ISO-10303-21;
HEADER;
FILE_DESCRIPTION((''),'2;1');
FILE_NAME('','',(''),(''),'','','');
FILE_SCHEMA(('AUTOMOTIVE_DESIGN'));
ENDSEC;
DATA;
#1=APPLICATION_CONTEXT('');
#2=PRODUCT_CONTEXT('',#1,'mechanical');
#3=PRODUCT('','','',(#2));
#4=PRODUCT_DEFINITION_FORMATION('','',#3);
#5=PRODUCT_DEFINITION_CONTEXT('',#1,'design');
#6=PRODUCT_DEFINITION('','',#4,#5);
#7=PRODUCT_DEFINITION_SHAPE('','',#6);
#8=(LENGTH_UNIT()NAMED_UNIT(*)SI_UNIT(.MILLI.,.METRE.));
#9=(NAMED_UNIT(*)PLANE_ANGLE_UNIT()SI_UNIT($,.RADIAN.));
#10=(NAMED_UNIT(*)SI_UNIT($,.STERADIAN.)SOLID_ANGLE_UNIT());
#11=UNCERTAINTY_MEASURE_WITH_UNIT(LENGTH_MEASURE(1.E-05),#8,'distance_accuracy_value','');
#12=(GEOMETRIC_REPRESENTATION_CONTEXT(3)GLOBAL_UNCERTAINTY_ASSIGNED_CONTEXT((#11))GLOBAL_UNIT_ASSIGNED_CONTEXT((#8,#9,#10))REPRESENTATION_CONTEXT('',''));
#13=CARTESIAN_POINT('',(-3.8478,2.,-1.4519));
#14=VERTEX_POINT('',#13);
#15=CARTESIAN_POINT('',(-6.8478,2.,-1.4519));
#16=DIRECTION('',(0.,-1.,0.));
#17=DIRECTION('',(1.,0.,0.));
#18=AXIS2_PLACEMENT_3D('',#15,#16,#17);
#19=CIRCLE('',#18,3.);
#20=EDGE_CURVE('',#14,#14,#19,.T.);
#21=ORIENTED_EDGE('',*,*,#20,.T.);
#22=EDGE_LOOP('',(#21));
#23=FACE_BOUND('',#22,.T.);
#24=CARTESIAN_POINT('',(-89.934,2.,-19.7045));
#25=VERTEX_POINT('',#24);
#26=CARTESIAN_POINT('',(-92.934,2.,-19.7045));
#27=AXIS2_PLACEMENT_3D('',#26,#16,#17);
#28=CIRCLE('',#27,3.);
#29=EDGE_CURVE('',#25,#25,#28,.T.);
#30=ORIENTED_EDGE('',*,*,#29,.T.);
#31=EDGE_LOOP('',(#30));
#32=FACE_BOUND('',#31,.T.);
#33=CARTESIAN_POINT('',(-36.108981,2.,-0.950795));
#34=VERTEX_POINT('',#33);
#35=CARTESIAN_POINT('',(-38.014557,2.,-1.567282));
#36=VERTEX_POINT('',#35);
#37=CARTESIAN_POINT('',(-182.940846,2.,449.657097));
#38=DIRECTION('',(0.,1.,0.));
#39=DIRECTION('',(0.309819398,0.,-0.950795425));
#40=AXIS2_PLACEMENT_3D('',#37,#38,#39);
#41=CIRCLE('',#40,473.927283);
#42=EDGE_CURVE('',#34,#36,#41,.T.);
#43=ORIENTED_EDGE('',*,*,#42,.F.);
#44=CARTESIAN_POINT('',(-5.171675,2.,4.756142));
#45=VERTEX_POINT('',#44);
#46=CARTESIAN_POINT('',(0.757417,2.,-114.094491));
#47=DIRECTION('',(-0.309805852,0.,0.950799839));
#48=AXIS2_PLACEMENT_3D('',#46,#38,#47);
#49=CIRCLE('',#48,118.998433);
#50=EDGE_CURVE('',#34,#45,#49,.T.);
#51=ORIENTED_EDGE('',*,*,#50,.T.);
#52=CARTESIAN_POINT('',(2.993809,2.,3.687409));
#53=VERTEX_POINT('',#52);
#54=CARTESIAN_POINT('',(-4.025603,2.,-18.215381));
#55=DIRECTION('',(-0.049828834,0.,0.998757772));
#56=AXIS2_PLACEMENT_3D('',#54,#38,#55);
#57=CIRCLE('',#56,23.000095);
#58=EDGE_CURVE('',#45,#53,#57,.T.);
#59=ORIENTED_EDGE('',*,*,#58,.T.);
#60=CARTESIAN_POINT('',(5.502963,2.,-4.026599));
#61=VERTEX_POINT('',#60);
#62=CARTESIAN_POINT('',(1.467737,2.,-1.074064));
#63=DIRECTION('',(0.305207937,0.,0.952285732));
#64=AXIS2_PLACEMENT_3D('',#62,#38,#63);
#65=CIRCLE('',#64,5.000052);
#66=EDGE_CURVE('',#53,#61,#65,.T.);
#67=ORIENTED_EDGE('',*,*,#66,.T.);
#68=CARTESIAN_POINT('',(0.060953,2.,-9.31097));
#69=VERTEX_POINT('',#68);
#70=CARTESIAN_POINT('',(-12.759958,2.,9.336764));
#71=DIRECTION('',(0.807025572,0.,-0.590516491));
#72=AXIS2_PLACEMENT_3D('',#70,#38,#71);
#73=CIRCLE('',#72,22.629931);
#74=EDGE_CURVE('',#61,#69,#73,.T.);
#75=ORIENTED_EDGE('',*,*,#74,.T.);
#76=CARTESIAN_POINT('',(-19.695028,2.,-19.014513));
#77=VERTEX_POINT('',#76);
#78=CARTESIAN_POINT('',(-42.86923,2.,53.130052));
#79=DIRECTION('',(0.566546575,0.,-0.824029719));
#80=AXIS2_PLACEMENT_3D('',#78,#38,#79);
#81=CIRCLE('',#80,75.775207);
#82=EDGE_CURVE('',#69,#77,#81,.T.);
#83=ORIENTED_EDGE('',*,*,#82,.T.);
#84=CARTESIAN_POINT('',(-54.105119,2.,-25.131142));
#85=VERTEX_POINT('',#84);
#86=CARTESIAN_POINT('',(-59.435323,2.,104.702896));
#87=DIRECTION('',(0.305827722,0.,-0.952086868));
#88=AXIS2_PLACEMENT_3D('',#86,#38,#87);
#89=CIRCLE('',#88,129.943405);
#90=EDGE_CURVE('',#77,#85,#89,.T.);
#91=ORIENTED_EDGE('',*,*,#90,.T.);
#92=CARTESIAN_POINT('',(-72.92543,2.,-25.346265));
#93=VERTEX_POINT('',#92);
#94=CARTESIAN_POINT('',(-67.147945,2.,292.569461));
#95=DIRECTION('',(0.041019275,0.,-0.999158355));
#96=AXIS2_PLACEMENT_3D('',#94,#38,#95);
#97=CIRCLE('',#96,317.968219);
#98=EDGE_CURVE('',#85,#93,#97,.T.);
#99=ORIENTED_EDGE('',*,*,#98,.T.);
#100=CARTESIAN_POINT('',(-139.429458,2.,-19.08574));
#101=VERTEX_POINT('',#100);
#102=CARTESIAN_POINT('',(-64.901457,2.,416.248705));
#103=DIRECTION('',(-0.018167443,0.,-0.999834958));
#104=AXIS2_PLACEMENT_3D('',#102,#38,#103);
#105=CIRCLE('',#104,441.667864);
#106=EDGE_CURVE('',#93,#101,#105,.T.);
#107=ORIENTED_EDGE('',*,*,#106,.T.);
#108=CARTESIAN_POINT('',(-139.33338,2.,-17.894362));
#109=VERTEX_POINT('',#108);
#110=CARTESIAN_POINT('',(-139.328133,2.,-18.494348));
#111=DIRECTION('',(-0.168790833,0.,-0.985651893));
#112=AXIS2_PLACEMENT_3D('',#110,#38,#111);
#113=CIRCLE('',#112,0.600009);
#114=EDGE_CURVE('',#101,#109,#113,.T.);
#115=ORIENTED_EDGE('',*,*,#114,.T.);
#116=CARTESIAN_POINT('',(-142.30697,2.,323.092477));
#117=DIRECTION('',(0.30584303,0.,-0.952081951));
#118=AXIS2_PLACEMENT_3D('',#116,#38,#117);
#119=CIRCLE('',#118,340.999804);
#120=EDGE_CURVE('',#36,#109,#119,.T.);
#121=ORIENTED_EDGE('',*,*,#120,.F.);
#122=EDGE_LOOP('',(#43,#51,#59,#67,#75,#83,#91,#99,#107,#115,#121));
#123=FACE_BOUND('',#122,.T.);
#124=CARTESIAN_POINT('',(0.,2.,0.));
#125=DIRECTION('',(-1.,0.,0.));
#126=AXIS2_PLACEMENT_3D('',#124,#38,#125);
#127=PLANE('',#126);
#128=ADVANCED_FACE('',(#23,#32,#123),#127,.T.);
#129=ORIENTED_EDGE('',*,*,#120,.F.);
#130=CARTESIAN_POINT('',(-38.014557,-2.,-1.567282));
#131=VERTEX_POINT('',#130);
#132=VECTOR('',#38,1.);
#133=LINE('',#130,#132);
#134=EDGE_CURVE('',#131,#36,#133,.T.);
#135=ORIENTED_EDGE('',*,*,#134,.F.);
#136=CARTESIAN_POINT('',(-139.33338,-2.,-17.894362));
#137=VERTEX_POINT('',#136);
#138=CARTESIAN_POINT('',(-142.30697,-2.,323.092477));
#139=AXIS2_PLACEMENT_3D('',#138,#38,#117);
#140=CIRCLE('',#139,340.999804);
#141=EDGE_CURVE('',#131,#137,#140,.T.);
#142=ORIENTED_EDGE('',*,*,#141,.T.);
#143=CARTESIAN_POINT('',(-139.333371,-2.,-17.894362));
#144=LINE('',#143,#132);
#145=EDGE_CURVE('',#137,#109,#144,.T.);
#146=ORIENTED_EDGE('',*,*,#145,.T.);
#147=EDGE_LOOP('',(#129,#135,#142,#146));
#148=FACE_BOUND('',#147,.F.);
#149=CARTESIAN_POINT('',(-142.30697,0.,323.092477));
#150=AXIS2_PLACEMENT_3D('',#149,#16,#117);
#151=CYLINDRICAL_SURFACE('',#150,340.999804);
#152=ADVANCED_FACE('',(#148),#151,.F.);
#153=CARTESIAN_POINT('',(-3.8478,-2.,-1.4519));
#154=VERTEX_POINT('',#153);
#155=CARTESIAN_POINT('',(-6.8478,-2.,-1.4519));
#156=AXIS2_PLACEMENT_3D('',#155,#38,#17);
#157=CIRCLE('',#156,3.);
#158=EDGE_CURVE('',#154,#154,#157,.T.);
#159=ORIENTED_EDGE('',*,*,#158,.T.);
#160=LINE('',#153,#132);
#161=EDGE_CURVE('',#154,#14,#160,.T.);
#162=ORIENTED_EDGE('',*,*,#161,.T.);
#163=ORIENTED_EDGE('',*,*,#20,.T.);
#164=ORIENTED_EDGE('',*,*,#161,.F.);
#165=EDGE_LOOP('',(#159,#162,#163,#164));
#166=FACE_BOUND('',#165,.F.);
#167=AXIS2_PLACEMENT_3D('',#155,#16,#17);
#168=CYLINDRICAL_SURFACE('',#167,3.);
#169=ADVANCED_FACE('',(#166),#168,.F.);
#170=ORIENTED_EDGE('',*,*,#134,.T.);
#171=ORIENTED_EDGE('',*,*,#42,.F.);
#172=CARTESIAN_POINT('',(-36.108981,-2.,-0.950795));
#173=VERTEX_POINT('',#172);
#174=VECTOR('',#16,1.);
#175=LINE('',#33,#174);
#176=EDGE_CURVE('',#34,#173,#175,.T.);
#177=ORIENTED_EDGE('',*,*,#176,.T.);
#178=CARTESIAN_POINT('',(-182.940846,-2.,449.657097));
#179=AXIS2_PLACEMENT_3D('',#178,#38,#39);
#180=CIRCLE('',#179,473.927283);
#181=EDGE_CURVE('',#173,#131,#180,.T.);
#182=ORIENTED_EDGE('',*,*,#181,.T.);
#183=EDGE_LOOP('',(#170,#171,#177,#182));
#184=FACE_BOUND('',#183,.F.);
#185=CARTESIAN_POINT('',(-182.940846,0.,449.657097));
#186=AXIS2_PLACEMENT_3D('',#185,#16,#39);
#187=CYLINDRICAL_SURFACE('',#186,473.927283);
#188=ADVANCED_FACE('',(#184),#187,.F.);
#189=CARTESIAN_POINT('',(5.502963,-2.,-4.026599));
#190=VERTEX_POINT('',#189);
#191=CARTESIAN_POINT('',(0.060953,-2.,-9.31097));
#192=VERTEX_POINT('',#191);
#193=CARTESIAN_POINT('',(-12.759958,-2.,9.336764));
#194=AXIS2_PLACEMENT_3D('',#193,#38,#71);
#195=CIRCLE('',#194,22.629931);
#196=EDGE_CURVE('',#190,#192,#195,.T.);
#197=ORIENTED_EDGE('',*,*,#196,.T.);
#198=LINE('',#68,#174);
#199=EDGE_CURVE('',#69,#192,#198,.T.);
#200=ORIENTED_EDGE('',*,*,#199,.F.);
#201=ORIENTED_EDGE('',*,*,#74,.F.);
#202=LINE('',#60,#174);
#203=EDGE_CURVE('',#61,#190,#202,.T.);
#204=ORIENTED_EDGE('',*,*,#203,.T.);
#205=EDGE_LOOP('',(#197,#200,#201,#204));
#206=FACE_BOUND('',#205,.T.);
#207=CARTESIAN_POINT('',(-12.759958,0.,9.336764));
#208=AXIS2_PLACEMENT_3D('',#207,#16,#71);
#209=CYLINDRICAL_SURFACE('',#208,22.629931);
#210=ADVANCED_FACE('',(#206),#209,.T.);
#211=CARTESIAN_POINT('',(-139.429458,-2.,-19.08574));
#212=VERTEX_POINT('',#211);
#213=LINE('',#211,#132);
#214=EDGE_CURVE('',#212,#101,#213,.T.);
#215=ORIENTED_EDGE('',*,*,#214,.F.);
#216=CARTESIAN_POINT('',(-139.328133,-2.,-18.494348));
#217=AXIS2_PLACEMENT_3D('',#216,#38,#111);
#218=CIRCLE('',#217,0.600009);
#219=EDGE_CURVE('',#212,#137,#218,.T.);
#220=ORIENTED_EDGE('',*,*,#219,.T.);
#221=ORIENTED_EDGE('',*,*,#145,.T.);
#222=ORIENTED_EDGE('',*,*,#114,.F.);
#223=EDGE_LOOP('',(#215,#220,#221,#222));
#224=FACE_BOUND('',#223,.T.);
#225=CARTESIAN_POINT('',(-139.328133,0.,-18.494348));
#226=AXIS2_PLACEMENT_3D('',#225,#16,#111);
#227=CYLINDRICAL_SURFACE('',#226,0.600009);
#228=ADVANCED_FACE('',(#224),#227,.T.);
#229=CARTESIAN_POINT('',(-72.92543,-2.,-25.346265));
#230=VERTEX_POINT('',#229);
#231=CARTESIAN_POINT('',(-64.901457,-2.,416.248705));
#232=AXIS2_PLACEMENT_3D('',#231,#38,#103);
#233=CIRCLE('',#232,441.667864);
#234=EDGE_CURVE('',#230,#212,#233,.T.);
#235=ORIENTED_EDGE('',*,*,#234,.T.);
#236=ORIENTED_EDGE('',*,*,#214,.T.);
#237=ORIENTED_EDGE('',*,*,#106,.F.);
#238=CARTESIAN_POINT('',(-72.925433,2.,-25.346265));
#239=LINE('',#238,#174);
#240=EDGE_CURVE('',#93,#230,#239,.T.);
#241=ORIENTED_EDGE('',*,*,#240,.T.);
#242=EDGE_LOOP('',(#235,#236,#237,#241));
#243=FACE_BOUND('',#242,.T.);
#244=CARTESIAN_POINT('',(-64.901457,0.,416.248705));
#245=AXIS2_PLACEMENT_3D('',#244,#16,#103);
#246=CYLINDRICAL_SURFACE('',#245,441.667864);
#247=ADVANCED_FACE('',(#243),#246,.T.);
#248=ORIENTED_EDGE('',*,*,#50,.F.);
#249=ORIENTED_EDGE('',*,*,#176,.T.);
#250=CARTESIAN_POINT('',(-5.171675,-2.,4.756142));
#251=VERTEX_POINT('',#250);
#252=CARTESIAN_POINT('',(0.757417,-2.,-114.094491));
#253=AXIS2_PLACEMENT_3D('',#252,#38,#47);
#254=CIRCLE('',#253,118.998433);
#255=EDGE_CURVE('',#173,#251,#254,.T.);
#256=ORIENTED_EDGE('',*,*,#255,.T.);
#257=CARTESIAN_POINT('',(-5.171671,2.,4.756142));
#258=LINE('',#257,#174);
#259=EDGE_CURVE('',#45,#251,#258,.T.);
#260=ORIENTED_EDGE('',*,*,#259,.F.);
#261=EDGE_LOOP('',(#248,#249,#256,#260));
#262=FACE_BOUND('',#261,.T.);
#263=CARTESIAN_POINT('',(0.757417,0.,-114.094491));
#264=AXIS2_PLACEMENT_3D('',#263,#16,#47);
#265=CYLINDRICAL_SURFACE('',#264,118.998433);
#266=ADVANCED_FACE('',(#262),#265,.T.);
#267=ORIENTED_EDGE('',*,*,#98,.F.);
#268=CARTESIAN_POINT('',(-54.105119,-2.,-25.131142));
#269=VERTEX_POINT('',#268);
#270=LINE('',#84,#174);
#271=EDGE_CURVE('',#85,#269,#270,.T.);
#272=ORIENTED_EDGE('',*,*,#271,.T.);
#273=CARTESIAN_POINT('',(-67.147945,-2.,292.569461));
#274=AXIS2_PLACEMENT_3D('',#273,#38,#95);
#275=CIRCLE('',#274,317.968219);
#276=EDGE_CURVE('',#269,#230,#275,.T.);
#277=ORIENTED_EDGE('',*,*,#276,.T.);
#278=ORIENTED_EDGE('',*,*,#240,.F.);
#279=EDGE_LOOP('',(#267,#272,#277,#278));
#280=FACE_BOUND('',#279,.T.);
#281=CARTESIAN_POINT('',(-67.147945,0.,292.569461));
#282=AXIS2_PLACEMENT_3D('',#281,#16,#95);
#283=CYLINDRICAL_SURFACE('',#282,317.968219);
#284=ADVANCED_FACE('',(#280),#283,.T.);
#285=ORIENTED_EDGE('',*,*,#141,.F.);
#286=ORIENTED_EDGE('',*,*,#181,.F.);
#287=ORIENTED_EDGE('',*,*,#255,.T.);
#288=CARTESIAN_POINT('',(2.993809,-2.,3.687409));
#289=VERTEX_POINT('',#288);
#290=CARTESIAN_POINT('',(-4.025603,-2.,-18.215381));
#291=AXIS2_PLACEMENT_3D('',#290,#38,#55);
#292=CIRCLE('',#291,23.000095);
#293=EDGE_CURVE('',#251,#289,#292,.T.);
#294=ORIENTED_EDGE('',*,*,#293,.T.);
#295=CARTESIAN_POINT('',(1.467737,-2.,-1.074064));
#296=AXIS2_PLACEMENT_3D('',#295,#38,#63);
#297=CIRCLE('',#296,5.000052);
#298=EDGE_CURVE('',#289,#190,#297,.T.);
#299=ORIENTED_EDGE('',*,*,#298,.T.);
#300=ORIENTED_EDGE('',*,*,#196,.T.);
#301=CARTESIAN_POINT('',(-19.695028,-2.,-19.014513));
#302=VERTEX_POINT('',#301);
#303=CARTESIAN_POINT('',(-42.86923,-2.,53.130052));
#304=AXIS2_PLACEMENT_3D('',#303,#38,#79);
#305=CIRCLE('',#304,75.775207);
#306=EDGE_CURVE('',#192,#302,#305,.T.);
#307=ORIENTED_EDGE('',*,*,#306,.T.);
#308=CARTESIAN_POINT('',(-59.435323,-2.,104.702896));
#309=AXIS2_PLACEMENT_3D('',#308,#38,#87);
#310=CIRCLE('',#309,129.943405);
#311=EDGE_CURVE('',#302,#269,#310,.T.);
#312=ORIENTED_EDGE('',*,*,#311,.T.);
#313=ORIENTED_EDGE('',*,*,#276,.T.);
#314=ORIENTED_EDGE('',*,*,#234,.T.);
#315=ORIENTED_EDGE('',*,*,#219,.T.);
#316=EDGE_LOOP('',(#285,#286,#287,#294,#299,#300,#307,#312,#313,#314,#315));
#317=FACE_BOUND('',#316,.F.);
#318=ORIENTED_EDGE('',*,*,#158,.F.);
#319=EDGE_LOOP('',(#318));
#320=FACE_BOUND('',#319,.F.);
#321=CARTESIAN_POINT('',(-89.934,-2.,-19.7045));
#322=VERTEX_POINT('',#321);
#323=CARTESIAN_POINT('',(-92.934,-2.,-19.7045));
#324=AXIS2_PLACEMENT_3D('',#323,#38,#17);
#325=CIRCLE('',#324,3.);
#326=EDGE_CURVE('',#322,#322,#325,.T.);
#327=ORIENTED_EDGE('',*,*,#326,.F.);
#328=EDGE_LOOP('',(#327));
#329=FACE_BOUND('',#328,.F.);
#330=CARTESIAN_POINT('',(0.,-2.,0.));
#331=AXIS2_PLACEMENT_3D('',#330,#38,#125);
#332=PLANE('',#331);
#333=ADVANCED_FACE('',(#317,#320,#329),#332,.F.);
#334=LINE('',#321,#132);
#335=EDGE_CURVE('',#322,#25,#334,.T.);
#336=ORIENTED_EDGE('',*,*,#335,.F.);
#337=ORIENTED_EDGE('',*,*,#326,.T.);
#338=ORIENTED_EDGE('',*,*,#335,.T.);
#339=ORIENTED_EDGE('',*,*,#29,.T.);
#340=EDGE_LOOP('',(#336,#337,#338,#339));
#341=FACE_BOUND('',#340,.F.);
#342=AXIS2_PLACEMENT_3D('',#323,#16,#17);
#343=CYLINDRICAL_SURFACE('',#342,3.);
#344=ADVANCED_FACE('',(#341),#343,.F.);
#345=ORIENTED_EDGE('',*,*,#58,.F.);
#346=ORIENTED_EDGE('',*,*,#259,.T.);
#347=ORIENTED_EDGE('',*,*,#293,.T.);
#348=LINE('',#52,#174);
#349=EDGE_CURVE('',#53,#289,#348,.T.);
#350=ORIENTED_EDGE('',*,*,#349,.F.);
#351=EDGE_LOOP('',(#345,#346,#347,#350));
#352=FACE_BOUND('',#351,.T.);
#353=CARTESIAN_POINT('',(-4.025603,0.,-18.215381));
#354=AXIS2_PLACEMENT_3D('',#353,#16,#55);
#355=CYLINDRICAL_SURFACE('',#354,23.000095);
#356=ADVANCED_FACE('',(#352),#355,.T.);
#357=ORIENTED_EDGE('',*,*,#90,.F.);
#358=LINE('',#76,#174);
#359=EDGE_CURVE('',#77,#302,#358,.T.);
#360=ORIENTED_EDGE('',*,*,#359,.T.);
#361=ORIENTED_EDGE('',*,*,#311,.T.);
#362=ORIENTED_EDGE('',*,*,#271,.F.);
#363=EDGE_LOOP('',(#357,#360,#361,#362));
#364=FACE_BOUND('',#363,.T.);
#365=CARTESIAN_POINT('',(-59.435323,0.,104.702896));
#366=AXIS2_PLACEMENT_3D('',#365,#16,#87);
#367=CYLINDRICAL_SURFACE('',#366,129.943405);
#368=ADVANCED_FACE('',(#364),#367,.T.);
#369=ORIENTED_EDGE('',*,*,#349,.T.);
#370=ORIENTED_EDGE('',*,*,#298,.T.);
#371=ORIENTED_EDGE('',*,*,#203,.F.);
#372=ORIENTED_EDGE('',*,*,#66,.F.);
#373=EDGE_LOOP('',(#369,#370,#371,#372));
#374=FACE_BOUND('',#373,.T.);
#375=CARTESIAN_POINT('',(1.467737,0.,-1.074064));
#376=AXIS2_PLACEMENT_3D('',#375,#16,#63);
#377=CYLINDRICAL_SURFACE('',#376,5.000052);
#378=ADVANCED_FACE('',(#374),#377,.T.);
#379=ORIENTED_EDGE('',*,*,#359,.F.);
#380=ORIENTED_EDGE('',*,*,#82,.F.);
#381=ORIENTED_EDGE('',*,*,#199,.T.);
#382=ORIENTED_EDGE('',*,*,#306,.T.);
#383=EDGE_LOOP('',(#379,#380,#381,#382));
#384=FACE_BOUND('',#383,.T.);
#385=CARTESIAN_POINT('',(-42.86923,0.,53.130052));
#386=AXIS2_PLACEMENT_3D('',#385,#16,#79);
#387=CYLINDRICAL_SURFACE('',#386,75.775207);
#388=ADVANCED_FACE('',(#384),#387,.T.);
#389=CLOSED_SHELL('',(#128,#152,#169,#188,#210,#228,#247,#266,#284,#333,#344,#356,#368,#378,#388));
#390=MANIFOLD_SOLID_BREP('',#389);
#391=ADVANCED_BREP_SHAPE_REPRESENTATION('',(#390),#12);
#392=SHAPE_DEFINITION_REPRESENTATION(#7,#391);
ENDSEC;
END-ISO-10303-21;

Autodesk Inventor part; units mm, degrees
ref_plane "YZ Plane" through (0, 0, 0) normal (1, 0, 0) x (0, 1, 0)
ref_plane "XZ Plane" through (0, 0, 0) normal (0, 1, 0) x (-1, 0, 0)
ref_plane "XY Plane" through (0, 0, 0) normal (0, 0, 1) x (1, 0, 0)
sketch "スケッチ1" plane through (0, 0, 0) normal (0, 1, 0) x (-1, 0, 0)
  arc A0 (139.5982, -20.0714) -> (139.3421, -16.8944) centre (139.3282, -18.4944) ccw projected
  arc A1 (72.9436, -26.3461) -> (139.5982, -20.0714) centre (64.9013, 416.2515) ccw projected
  arc A2 (54.0641, -26.1303) -> (72.9436, -26.3461) centre (67.1484, 292.5868) ccw projected
  arc A3 (19.3892, -19.9666) -> (54.0641, -26.1303) centre (59.4352, 104.7024) ccw projected
  arc A4 (-0.6275, -10.135) -> (19.3892, -19.9666) centre (42.8692, 53.13) ccw projected
  arc A5 (-6.31, -4.6171) -> (-0.6275, -10.135) centre (12.76, 9.3368) ccw projected
  arc A6 (-3.299, 4.6397) -> (-6.31, -4.6171) centre (-1.4678, -1.074) ccw projected
  arc A7 (5.2215, 5.7549) -> (-3.299, 4.6397) centre (4.0256, -18.2153) ccw projected
  arc A8 (36.4188, 0) -> (5.2215, 5.7549) centre (-0.7578, -114.096) ccw projected
  arc A9 (36.4188, 0) -> (38.3204, -0.6152) centre (185.125, 456.3841) ccw projected
  arc A10 (38.3204, -0.6152) -> (139.3421, -16.8944) centre (142.307, 323.0926) ccw projected
  point P0 (0, 0)
extrude "押し出し1" add sketch "スケッチ1" along normal mid plane 4
sketch "スケッチ2" plane through (0, -2, 0) normal (0, -1, 0) x (1, 0, 0)
  circle A0 centre (-6.8478, -1.4519) radius 3
  circle A1 centre (-92.934, -19.7045) radius 3
  line L0 (0, 0) -> (-112.4991, -23.8528)
  arc A2 (-139.5982, -20.0714) -> (-72.9436, -26.3461) centre (-64.9013, 416.2515) ccw projected
  dimension "d3" = 6
  dimension "d4" = 6
  dimension "d5" = 115
  dimension "d6" = 7
  dimension "d7" = 95
extrude "押し出し2" cut sketch "スケッチ2" against normal through all
thicken "厚み1" operation cut thickness 1 both sides no extend neighbours no toward (0.0338891, 0, -0.9994256) faces at (-130.7847, 0.6667, -16.7121) (-37.4749, 0.6667, -0.3428) (-8.7492, -0.6667, 5.5268) (2.3792, -0.6667, 4.9143) (6.574, -0.6667, -4.2247) (1.3466, -0.6667, -9.6205) (-17.0344, -0.6667, -19.1679) (-50.1454, -0.6667, -25.9105) (-56.1608, 0.6667, -26.2095) (-102.6817, 0.6667, -24.804) (-139.7269, 0.6667, -20.0439)
properties part number "flap_s"
